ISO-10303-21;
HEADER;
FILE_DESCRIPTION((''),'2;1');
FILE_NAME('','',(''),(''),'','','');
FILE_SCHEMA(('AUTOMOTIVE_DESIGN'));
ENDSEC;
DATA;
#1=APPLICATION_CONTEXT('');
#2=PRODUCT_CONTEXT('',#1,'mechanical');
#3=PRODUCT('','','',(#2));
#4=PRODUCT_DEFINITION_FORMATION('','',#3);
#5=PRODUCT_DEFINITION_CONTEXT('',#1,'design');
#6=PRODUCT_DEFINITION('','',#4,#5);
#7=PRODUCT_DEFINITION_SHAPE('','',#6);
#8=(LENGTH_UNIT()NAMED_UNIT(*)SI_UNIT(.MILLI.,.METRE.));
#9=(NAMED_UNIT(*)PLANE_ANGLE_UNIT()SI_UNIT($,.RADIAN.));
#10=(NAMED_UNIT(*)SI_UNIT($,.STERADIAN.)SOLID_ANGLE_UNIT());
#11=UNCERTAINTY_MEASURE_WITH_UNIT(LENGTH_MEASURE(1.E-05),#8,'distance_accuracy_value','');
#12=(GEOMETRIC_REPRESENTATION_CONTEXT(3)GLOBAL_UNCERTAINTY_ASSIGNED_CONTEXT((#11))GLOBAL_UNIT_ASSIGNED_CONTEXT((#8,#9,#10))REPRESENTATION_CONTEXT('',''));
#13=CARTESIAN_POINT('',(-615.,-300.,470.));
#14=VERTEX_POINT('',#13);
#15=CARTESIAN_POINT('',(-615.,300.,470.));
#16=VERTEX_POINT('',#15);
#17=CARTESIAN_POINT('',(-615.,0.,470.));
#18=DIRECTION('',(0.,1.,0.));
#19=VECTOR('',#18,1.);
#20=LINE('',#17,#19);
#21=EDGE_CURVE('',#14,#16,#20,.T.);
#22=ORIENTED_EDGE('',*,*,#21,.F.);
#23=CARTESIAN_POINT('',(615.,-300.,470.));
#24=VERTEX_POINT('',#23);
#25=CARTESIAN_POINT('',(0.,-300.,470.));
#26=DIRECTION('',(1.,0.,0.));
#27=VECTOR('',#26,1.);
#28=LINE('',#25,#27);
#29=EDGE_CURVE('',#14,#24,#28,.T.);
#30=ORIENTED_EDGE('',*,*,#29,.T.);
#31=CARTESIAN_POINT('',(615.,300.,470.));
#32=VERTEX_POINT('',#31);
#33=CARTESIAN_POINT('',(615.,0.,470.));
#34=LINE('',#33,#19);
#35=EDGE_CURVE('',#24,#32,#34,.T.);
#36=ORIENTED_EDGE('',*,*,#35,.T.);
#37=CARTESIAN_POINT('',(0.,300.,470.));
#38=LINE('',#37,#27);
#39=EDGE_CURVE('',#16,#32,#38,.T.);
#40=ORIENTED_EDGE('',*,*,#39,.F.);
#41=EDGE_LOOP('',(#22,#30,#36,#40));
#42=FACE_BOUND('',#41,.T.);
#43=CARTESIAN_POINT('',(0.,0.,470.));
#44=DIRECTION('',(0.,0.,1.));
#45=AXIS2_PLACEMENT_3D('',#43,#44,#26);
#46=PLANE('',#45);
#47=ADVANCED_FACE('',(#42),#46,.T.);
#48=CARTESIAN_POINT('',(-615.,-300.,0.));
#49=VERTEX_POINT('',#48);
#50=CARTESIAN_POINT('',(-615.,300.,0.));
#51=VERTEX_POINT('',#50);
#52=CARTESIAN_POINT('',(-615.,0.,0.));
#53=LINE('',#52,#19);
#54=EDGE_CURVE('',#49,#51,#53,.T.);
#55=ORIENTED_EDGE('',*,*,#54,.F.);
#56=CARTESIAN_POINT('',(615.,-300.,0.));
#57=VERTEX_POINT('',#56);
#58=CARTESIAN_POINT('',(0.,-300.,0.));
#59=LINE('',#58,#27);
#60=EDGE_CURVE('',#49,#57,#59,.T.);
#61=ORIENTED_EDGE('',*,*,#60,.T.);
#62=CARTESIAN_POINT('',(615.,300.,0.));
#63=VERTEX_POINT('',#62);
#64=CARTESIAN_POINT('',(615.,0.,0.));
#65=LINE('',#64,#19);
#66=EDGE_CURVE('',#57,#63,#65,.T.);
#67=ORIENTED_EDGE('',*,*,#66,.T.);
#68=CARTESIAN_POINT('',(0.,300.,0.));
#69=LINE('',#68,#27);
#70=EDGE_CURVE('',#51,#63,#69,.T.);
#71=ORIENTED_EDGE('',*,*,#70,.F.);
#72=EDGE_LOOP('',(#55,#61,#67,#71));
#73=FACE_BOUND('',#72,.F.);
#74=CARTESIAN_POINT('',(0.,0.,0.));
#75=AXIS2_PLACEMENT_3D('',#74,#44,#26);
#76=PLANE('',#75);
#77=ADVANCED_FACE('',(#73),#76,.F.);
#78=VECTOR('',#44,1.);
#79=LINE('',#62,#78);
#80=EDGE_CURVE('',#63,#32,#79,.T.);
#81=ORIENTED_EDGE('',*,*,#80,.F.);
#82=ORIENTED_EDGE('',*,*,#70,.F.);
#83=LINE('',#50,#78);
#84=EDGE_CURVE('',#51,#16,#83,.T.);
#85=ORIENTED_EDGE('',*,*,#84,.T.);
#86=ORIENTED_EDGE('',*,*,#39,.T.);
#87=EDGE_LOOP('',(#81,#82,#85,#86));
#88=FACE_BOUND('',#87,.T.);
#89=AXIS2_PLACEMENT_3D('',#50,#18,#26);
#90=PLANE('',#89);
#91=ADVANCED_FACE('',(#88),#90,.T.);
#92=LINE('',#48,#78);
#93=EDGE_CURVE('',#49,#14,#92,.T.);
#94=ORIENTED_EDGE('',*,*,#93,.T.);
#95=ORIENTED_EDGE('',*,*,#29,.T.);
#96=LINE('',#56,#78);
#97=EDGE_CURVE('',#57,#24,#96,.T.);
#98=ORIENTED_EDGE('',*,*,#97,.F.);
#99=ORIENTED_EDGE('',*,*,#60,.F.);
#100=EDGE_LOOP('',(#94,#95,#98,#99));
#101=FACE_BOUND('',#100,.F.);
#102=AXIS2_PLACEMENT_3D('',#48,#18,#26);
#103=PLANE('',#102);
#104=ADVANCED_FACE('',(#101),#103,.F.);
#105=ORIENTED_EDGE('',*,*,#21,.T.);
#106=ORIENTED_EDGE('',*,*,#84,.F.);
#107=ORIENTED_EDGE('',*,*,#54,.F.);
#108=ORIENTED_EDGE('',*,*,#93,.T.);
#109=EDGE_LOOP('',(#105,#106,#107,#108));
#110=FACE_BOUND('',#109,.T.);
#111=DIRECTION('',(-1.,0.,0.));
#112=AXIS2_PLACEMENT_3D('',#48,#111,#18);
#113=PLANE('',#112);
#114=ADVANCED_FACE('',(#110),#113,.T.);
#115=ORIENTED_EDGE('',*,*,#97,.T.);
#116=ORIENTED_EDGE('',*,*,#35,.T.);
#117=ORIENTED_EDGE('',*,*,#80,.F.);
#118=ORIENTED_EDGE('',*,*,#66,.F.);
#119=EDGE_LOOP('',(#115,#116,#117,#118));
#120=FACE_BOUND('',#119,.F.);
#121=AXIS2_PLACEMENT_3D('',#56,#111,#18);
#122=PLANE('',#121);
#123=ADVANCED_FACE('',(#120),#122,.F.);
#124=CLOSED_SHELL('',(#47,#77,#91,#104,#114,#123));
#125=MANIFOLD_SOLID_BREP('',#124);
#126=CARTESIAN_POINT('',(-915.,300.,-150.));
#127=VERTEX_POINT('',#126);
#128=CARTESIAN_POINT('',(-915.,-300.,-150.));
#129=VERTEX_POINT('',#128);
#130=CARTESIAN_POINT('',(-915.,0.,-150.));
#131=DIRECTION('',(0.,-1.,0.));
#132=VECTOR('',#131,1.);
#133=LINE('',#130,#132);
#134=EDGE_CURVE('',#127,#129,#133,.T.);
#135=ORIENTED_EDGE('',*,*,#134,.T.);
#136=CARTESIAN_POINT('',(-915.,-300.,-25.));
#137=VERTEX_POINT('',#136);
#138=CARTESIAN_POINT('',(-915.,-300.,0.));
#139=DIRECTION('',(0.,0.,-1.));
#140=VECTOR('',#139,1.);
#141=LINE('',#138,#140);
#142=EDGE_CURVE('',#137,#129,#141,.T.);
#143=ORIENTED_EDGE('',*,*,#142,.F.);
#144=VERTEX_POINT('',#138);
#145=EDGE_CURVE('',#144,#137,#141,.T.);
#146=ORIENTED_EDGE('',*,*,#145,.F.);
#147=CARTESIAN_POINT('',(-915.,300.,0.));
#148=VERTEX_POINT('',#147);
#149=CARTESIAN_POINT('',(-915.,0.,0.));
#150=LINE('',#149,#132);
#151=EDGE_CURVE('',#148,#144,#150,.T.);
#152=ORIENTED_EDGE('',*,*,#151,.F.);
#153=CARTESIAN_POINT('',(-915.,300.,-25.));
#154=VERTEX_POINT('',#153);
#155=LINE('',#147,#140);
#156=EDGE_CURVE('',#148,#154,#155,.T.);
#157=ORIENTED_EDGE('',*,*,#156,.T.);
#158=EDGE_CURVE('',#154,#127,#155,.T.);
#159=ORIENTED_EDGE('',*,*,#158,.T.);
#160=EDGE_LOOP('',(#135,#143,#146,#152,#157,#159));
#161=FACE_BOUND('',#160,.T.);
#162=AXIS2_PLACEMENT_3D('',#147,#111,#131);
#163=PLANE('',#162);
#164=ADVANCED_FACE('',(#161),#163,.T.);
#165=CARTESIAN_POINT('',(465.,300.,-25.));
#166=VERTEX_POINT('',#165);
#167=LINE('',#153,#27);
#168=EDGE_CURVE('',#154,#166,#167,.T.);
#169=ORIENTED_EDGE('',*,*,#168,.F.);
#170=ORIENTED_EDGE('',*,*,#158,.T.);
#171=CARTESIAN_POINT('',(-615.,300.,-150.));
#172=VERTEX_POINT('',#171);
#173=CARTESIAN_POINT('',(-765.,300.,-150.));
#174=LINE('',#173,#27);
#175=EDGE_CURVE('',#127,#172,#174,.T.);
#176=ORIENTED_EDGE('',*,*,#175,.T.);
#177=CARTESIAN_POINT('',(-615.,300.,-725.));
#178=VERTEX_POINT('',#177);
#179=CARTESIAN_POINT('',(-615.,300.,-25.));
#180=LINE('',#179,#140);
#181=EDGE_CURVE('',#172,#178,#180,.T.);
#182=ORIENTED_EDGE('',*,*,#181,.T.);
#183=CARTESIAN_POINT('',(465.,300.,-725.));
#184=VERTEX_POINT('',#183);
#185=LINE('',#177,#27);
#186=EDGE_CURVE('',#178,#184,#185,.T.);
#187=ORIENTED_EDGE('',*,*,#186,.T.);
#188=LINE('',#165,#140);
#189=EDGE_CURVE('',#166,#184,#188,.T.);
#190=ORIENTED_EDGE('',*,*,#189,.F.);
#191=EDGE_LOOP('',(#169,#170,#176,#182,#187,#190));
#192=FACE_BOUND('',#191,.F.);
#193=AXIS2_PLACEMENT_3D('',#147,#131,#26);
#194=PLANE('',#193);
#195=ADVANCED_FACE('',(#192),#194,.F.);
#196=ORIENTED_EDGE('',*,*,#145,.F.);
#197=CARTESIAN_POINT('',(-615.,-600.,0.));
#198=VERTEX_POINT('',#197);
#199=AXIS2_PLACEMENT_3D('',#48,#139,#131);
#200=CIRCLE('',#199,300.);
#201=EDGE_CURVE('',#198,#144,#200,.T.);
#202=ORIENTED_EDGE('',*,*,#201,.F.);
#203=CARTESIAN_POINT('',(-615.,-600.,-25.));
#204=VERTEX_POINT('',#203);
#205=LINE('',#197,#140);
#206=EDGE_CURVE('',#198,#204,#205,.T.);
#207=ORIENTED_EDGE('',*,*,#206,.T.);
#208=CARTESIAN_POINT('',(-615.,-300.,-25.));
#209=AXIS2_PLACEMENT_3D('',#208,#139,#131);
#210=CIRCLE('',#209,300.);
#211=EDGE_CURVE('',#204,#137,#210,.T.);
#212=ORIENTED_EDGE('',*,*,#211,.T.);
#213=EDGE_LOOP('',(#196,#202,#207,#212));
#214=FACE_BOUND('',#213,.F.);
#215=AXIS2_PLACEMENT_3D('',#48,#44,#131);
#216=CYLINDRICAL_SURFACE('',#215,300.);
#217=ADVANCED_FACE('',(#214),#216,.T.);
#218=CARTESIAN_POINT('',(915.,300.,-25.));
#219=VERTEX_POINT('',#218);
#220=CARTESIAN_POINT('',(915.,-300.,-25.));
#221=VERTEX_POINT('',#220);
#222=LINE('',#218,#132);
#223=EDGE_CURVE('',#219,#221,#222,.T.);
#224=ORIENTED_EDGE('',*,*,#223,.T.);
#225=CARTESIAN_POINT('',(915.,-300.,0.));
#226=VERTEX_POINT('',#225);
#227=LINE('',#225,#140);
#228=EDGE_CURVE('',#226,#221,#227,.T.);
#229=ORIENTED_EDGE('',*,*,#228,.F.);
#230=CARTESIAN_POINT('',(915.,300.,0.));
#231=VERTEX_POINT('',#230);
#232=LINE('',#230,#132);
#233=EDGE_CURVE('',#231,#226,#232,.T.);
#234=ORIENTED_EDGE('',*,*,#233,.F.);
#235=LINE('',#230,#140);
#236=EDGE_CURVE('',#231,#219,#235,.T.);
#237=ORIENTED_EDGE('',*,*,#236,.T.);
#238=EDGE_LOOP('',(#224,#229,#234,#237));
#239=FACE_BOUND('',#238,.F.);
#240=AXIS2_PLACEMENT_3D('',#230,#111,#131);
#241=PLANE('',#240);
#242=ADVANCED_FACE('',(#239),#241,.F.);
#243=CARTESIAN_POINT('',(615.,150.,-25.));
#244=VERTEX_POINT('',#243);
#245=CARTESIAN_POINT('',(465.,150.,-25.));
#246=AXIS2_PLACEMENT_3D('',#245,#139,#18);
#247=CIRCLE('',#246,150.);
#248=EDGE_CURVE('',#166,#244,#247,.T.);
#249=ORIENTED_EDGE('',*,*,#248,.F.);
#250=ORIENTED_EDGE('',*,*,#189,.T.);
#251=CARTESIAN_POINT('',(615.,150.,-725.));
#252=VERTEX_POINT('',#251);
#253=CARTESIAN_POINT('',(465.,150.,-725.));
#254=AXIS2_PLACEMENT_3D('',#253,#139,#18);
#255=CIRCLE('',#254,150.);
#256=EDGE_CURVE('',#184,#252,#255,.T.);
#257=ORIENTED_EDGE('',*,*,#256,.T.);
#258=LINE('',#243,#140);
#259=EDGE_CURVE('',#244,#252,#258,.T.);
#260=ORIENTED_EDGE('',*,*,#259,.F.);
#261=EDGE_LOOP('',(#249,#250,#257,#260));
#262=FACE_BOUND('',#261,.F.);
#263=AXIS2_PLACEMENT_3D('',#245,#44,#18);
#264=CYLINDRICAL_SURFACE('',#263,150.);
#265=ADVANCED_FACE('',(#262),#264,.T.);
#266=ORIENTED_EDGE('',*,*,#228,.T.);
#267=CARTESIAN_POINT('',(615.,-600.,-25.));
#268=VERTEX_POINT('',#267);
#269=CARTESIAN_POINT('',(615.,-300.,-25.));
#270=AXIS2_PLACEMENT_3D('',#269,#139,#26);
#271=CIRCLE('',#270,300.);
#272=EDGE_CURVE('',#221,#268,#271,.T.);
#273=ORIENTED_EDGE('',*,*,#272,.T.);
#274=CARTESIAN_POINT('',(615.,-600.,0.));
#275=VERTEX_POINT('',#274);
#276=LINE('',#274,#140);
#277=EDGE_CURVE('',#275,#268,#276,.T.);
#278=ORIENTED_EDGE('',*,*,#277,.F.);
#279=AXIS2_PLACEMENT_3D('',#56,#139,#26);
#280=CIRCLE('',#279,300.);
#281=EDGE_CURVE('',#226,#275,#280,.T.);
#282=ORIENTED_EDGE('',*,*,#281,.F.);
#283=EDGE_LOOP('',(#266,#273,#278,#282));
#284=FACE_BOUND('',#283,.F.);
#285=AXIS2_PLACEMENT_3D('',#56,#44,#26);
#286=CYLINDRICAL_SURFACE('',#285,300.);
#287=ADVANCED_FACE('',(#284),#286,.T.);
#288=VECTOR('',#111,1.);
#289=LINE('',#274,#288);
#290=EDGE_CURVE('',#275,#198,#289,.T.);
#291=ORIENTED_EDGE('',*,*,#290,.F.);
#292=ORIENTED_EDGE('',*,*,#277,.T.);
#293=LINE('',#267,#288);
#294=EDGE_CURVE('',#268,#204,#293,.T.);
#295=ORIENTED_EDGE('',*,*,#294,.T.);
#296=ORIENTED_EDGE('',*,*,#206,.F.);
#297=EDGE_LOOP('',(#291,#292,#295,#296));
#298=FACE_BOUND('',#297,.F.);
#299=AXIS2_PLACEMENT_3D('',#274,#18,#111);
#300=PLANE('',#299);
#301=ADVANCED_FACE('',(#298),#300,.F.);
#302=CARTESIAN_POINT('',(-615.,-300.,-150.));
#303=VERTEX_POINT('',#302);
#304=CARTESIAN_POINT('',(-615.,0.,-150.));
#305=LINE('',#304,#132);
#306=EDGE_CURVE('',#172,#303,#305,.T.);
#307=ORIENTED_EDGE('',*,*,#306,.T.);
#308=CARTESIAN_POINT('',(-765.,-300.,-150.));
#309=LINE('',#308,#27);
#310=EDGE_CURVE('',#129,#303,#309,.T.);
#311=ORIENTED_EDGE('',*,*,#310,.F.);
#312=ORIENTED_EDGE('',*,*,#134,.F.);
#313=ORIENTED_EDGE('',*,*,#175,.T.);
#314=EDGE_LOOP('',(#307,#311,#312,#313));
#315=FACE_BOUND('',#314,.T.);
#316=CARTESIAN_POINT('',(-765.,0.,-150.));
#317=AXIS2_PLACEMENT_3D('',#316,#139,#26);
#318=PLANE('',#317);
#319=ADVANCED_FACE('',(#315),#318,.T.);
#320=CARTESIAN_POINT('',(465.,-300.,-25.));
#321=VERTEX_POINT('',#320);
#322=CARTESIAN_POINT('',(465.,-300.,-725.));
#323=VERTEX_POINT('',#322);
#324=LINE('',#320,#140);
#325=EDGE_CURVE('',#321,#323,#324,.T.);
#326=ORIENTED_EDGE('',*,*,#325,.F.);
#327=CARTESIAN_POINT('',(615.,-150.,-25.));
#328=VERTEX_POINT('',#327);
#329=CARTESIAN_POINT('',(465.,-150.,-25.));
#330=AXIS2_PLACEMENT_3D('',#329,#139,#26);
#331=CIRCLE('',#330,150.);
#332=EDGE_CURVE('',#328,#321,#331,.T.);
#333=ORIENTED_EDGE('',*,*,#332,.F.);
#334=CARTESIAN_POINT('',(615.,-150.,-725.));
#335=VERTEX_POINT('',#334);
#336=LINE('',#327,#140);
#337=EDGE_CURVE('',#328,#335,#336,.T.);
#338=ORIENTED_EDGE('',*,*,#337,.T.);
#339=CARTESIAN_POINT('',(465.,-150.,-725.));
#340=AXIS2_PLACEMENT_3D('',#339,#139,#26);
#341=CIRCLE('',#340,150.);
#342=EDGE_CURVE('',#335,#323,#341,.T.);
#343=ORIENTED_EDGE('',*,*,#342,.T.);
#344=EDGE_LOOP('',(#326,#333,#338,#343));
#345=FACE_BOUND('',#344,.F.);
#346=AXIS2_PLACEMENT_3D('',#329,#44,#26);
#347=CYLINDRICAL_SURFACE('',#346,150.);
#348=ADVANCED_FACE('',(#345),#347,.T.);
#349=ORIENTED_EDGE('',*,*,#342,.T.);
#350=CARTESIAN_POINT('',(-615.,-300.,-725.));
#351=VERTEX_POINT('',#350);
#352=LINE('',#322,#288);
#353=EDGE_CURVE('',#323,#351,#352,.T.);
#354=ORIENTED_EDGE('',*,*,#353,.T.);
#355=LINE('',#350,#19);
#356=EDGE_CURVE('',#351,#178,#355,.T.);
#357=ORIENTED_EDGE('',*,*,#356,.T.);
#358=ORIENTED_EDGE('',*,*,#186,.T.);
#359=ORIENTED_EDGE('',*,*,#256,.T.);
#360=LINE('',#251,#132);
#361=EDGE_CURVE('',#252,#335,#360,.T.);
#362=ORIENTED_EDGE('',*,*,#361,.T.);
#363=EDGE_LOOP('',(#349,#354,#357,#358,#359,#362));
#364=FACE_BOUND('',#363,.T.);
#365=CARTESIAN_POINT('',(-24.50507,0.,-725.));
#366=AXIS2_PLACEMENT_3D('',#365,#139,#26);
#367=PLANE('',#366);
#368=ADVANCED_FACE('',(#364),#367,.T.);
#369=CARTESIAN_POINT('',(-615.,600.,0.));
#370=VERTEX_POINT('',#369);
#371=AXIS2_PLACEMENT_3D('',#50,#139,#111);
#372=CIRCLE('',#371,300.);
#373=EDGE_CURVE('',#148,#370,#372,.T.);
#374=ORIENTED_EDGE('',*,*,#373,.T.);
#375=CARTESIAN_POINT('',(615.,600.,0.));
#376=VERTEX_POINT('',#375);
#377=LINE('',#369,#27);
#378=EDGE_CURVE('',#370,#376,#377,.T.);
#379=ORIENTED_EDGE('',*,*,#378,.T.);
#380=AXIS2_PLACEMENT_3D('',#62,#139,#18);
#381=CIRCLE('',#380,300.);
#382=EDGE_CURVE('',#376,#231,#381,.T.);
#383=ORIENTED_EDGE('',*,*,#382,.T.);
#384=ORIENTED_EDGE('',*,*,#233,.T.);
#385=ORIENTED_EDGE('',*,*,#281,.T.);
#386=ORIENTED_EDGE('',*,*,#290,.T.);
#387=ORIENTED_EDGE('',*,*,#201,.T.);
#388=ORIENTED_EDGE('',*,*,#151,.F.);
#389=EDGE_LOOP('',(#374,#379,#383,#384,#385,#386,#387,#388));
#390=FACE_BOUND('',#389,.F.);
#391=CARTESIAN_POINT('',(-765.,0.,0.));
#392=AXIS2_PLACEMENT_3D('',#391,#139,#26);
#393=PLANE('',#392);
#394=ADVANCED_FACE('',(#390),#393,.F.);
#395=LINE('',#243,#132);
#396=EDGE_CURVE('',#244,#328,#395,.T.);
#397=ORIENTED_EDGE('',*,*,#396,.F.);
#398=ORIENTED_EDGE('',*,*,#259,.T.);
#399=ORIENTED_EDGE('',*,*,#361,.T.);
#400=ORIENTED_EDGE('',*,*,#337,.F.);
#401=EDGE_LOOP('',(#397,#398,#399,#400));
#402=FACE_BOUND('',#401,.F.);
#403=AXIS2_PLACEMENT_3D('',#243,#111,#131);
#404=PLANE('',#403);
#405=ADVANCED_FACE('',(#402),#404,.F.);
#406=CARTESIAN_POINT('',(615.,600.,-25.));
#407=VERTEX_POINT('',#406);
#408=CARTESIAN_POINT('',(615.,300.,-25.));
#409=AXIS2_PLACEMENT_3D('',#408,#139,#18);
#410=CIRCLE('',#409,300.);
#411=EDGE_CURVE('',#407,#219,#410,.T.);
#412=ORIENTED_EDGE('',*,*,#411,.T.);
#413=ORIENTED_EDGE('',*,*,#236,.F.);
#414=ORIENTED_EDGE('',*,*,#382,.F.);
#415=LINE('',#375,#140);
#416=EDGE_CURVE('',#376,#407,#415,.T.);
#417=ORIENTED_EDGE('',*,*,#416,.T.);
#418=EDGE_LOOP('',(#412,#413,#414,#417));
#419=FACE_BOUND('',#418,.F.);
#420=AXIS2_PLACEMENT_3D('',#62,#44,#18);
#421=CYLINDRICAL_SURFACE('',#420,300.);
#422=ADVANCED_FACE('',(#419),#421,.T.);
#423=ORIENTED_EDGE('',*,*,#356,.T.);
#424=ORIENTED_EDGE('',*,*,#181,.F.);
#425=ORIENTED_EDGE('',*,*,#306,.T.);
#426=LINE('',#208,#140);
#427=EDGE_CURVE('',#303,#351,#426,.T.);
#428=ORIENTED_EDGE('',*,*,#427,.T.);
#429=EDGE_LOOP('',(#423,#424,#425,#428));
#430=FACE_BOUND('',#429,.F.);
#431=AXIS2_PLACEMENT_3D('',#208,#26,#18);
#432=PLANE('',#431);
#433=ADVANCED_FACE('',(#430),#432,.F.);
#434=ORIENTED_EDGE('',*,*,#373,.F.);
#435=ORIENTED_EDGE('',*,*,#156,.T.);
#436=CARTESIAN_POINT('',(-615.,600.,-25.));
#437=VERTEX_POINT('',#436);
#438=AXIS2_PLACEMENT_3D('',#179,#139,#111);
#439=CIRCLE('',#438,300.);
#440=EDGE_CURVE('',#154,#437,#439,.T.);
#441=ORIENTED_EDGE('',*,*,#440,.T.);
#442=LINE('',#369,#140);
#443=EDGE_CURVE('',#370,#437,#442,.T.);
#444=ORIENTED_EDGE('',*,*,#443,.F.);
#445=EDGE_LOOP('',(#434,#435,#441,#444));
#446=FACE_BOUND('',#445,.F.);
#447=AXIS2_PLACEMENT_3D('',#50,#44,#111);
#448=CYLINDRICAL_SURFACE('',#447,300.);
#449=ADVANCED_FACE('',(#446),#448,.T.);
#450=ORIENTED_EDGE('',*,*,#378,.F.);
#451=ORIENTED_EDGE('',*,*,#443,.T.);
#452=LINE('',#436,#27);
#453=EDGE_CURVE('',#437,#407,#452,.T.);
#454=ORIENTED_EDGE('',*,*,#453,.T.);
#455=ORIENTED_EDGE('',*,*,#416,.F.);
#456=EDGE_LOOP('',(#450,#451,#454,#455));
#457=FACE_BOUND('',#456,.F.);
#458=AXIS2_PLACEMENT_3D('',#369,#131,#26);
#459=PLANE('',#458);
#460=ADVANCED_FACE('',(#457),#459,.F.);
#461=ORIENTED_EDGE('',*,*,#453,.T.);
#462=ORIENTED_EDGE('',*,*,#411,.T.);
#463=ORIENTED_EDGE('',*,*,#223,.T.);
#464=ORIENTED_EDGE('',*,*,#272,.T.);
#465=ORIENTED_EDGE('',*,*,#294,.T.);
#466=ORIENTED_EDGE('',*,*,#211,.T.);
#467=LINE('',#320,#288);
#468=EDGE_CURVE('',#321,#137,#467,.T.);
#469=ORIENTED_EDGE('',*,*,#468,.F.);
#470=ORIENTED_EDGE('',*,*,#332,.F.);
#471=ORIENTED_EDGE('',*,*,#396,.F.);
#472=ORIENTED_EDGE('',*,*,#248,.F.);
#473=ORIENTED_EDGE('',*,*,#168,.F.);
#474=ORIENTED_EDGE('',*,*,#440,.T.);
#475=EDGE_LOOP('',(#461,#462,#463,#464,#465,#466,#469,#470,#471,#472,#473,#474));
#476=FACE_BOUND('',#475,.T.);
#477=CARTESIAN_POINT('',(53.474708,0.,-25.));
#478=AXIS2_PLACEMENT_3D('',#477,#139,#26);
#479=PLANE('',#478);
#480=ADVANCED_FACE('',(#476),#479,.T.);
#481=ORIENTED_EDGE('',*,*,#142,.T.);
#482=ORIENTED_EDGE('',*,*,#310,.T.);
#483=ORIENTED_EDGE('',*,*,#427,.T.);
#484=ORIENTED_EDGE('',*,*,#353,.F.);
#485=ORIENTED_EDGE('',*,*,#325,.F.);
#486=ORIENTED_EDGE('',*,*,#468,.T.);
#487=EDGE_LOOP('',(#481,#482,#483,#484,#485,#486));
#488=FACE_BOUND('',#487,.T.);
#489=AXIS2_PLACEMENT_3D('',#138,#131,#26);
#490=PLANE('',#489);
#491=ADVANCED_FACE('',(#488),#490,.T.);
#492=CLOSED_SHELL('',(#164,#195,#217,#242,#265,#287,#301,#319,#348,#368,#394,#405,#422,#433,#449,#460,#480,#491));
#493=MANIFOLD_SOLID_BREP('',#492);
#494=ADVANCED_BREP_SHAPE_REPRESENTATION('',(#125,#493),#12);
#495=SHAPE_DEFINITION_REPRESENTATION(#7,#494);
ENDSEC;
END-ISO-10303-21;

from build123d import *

# Parameters (mm, degrees)
F0_W     = 1230
F0_H     = 600
F1_DEPTH = 470
F2_W     = 1230
F2_H     = 600
F3_DEPTH = 25
F5_DEPTH = 700
F2_W_2   = 300
F6_DEPTH = 150


with BuildPart() as f1:
    # F0 (on Top) → F1 (new body)
    with BuildSketch(Plane.XY):
        Rectangle(F0_W, F0_H)
    extrude(amount=F1_DEPTH)


with BuildPart() as f3:
    # F2 (on face) → F3 (new body)
    with BuildSketch(Plane(origin=(0, 0, 0), x_dir=(1, 0, 0), z_dir=(0, 0, -1))):
        with BuildLine():
            Line((615, 600), (-615, 600))
            ThreePointArc((-615, 600), (-827.132034356, 512.132034356), (-915, 300))
            Line((-915, 300), (-615, 300))
            Line((-615, 300), (615, 300))
            Line((615, 300), (615, -300))
            Line((615, -300), (-615, -300))
            Line((-615, -300), (-915, -300))
            ThreePointArc((-915, -300), (-827.132034356, -512.132034356), (-615, -600))
            Line((-615, -600), (615, -600))
            ThreePointArc((615, -600), (827.132034356, -512.132034356), (915, -300))
            Line((915, -300), (915, 300))
            ThreePointArc((915, 300), (827.132034356, 512.132034356), (615, 600))
        make_face()
        Rectangle(F2_W, F2_H)
    extrude(amount=F3_DEPTH)

    # F4 (on face) → F5 (join)
    with BuildSketch(Plane(origin=(0, 0, -25), x_dir=(1, 0, 0), z_dir=(0, 0, -1))):
        with BuildLine():
            Line((-615, -300), (-465, -300))
            Line((-465, -300), (465, -300))
            ThreePointArc((465, -300), (571.066017178, -256.066017178), (615, -150))
            Line((615, -150), (615, 150))
            ThreePointArc((615, 150), (571.066017178, 256.066017178), (465, 300))
            Line((465, 300), (-465, 300))
            Line((-465, 300), (-615, 300))
            Line((-615, 300), (-615, 150))
            Line((-615, 150), (-615, -150))
            Line((-615, -150), (-615, -300))
        make_face()
    extrude(amount=F5_DEPTH)

    # F2 (on face) → F6 (join)
    with BuildSketch(Plane(origin=(0, 0, 0), x_dir=(1, 0, 0), z_dir=(0, 0, -1))):
        with Locations((-765, 0)):
            Rectangle(F2_W_2, F2_H)
    extrude(amount=F6_DEPTH)


solid = Compound([f1.part, f3.part])
